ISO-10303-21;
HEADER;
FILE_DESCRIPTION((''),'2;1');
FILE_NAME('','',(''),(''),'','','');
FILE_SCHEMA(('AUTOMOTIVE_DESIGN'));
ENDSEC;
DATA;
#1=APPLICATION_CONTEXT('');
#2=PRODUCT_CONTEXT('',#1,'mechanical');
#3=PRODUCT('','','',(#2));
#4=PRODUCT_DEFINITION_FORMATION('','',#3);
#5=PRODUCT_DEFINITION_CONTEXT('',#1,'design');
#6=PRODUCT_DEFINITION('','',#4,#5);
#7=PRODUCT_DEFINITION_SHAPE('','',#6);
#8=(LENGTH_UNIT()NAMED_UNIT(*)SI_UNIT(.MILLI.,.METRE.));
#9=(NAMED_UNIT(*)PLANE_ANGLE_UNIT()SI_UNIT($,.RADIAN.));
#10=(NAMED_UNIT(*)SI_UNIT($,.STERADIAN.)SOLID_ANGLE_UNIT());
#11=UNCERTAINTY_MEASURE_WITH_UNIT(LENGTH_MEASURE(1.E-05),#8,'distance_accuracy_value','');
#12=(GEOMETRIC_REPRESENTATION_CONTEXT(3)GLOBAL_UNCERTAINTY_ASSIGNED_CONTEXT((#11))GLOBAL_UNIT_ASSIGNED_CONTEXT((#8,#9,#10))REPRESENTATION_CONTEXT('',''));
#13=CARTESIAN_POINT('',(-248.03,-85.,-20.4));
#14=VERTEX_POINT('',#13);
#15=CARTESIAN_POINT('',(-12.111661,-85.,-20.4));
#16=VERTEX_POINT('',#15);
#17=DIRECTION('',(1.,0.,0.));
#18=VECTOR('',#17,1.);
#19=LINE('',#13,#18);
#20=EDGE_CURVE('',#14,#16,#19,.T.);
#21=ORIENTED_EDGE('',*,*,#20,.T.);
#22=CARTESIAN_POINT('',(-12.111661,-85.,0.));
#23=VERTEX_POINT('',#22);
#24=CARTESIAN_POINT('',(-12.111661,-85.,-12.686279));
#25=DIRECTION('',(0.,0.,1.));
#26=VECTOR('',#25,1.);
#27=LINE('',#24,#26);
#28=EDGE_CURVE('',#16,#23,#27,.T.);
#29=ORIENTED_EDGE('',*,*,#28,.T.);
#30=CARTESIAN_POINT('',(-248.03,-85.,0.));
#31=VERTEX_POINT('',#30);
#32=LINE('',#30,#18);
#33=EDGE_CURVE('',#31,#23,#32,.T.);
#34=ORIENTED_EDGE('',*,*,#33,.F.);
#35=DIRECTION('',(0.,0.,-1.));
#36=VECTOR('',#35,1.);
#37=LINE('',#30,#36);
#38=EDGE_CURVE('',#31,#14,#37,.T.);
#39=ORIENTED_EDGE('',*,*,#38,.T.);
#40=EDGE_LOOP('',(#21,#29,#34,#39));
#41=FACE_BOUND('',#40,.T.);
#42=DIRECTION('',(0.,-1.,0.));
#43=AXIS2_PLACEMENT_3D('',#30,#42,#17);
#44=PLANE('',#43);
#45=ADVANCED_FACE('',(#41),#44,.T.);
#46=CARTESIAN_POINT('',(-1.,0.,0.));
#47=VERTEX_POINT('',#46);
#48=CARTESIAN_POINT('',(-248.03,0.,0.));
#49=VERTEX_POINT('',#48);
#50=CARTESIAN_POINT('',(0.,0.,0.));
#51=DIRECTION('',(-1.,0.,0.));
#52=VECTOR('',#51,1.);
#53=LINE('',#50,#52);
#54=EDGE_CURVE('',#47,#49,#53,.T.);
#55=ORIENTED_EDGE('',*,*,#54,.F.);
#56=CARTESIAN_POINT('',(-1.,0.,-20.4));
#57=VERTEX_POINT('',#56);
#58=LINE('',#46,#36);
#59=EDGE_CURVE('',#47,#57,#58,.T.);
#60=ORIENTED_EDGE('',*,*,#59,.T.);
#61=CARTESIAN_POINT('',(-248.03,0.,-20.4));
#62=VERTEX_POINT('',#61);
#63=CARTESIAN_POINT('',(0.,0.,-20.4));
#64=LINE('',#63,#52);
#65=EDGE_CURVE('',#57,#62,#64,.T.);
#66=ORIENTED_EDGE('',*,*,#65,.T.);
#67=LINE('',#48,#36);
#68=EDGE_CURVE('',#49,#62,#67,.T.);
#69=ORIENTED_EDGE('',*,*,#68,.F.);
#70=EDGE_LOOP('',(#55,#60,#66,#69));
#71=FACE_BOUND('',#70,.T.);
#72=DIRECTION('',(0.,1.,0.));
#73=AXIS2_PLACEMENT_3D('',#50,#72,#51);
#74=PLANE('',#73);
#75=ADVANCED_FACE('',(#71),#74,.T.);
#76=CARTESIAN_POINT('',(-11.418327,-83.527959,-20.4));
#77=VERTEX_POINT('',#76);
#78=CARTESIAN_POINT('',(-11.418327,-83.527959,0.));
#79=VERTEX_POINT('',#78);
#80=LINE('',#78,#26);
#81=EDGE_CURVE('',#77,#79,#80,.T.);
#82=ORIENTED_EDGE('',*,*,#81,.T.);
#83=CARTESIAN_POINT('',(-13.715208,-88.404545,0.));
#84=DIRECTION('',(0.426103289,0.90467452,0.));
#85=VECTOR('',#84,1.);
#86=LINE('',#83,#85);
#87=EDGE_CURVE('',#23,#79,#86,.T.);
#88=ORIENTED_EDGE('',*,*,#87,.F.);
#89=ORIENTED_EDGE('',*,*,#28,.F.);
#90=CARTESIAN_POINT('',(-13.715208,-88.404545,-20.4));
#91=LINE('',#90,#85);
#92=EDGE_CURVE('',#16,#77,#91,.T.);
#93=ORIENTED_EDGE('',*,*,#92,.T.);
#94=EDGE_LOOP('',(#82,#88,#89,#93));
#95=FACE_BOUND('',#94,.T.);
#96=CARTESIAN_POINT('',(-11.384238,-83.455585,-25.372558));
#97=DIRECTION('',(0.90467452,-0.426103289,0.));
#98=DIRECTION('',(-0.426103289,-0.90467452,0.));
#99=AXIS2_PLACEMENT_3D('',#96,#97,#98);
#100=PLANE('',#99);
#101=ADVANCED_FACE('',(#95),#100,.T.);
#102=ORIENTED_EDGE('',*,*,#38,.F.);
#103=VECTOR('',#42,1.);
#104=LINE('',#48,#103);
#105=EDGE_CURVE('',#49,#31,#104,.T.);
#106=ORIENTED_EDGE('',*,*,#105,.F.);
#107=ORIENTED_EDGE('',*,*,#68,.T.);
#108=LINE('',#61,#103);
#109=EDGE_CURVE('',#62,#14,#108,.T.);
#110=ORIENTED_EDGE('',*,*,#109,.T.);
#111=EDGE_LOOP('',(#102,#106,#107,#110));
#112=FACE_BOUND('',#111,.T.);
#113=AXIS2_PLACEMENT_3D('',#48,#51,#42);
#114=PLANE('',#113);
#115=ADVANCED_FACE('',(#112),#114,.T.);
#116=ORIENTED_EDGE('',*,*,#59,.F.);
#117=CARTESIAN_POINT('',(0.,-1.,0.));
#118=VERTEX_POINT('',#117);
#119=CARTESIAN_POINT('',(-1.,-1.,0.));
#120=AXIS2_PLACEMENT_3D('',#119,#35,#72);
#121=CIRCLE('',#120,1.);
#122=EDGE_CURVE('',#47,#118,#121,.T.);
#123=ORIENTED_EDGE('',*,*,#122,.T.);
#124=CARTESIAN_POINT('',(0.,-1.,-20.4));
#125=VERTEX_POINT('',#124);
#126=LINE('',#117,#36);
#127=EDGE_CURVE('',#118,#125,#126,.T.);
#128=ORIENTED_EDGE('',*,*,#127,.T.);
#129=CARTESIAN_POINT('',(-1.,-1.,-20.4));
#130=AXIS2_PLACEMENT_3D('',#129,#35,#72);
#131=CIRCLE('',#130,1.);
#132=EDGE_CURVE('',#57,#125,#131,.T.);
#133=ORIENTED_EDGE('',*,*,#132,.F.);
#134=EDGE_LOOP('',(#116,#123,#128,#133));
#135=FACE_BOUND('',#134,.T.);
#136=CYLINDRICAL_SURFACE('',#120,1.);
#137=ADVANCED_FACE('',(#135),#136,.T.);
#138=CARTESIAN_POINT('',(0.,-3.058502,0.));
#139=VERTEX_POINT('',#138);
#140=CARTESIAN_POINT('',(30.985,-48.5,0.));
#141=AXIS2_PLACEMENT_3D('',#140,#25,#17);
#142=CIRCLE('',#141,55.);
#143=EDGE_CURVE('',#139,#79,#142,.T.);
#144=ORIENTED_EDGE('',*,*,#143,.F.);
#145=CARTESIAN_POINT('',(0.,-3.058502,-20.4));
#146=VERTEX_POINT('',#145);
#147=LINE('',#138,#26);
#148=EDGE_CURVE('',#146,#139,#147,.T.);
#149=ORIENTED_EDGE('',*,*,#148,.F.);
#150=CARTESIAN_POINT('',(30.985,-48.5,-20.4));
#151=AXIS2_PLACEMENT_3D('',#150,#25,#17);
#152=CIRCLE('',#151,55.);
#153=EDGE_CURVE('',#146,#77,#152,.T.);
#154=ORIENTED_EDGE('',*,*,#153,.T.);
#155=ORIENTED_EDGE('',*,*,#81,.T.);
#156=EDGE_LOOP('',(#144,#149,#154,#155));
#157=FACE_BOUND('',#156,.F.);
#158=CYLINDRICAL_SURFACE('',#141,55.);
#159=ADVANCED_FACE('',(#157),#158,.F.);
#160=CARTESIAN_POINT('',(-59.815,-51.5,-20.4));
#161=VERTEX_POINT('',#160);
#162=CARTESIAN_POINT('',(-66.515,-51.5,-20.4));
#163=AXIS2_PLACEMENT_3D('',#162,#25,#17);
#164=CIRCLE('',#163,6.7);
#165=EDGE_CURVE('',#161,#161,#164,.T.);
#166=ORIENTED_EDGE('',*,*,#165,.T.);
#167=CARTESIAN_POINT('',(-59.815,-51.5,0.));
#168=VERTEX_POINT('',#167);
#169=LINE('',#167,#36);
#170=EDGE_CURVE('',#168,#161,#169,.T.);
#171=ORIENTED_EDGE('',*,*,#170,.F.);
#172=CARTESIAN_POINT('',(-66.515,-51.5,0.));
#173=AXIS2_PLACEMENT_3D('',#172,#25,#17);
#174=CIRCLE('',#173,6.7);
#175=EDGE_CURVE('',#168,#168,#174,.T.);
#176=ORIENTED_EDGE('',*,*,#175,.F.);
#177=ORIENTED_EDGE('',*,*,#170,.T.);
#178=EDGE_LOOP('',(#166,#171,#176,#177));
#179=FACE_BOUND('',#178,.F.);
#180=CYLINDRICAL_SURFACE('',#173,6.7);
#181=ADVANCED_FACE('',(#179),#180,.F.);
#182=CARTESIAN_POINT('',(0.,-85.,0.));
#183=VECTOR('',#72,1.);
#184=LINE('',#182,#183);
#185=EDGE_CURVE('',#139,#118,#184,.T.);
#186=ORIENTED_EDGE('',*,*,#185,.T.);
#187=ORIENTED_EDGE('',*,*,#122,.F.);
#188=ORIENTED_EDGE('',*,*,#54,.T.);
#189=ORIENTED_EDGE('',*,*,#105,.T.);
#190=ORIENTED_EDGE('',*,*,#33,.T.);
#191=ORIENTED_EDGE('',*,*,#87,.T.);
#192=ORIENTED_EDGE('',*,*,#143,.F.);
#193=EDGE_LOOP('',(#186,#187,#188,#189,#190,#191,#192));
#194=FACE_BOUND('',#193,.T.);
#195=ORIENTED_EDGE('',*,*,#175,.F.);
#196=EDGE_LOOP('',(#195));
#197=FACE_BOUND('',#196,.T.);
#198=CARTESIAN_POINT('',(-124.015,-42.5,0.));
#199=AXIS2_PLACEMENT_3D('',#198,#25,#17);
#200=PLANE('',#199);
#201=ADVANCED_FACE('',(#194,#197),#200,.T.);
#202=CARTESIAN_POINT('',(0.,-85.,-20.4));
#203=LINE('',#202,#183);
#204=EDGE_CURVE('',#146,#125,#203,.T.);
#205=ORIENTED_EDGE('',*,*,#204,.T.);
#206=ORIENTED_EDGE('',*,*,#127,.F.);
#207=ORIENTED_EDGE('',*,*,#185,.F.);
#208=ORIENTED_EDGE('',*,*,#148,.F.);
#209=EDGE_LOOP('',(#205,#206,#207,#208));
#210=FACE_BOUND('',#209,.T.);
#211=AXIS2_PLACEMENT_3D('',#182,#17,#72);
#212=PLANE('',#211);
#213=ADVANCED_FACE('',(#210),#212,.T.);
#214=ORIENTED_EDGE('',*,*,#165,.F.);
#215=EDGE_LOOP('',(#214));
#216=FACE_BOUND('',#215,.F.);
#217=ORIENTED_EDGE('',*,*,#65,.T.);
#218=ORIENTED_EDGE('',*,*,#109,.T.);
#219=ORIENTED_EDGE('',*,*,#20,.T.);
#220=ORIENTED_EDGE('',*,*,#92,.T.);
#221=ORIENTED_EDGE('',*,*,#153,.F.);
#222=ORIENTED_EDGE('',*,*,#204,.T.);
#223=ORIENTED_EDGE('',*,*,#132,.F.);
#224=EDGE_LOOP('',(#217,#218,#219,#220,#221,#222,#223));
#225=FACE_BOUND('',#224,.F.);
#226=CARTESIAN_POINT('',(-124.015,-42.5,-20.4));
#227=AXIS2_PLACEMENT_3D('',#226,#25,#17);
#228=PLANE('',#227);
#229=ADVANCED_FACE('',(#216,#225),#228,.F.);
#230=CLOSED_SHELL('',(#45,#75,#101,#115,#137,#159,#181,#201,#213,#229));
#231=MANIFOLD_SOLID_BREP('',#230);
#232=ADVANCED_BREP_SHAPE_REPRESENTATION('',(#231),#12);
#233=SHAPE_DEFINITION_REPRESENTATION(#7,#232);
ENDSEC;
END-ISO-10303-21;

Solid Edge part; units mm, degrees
sketch "Sketch1" plane through (0, 0, 0) normal (0, 0, 1) x (1, 0, 0)
  line L0 (0, 0) -> (-248.03, 0)
  line L1 (-248.03, 0) -> (-248.03, -85)
  line L2 (-248.03, -85) -> (0, -85)
  line L3 (0, -85) -> (0, 0)
extrude "Protrusion1" add sketch "Sketch1" against normal blind 20.4
sketch "Sketch2" plane through (-124.015, -42.5, 0) normal (0, 0, 1) x (1, 0, 0)
  circle A0 centre (155, -6) radius 55
  circle A1 centre (57.5, -9) radius 6.7
extrude "ExtrudedCutout_1" cut sketch "Sketch2" against normal blind 20.5
chamfer "Chamfer_2" distance 2 angle 45 1 edges at (-10.158, -85, -10.2)
fillet "Round_1" radius 1 1 edges at (0, 0, -10.2)
